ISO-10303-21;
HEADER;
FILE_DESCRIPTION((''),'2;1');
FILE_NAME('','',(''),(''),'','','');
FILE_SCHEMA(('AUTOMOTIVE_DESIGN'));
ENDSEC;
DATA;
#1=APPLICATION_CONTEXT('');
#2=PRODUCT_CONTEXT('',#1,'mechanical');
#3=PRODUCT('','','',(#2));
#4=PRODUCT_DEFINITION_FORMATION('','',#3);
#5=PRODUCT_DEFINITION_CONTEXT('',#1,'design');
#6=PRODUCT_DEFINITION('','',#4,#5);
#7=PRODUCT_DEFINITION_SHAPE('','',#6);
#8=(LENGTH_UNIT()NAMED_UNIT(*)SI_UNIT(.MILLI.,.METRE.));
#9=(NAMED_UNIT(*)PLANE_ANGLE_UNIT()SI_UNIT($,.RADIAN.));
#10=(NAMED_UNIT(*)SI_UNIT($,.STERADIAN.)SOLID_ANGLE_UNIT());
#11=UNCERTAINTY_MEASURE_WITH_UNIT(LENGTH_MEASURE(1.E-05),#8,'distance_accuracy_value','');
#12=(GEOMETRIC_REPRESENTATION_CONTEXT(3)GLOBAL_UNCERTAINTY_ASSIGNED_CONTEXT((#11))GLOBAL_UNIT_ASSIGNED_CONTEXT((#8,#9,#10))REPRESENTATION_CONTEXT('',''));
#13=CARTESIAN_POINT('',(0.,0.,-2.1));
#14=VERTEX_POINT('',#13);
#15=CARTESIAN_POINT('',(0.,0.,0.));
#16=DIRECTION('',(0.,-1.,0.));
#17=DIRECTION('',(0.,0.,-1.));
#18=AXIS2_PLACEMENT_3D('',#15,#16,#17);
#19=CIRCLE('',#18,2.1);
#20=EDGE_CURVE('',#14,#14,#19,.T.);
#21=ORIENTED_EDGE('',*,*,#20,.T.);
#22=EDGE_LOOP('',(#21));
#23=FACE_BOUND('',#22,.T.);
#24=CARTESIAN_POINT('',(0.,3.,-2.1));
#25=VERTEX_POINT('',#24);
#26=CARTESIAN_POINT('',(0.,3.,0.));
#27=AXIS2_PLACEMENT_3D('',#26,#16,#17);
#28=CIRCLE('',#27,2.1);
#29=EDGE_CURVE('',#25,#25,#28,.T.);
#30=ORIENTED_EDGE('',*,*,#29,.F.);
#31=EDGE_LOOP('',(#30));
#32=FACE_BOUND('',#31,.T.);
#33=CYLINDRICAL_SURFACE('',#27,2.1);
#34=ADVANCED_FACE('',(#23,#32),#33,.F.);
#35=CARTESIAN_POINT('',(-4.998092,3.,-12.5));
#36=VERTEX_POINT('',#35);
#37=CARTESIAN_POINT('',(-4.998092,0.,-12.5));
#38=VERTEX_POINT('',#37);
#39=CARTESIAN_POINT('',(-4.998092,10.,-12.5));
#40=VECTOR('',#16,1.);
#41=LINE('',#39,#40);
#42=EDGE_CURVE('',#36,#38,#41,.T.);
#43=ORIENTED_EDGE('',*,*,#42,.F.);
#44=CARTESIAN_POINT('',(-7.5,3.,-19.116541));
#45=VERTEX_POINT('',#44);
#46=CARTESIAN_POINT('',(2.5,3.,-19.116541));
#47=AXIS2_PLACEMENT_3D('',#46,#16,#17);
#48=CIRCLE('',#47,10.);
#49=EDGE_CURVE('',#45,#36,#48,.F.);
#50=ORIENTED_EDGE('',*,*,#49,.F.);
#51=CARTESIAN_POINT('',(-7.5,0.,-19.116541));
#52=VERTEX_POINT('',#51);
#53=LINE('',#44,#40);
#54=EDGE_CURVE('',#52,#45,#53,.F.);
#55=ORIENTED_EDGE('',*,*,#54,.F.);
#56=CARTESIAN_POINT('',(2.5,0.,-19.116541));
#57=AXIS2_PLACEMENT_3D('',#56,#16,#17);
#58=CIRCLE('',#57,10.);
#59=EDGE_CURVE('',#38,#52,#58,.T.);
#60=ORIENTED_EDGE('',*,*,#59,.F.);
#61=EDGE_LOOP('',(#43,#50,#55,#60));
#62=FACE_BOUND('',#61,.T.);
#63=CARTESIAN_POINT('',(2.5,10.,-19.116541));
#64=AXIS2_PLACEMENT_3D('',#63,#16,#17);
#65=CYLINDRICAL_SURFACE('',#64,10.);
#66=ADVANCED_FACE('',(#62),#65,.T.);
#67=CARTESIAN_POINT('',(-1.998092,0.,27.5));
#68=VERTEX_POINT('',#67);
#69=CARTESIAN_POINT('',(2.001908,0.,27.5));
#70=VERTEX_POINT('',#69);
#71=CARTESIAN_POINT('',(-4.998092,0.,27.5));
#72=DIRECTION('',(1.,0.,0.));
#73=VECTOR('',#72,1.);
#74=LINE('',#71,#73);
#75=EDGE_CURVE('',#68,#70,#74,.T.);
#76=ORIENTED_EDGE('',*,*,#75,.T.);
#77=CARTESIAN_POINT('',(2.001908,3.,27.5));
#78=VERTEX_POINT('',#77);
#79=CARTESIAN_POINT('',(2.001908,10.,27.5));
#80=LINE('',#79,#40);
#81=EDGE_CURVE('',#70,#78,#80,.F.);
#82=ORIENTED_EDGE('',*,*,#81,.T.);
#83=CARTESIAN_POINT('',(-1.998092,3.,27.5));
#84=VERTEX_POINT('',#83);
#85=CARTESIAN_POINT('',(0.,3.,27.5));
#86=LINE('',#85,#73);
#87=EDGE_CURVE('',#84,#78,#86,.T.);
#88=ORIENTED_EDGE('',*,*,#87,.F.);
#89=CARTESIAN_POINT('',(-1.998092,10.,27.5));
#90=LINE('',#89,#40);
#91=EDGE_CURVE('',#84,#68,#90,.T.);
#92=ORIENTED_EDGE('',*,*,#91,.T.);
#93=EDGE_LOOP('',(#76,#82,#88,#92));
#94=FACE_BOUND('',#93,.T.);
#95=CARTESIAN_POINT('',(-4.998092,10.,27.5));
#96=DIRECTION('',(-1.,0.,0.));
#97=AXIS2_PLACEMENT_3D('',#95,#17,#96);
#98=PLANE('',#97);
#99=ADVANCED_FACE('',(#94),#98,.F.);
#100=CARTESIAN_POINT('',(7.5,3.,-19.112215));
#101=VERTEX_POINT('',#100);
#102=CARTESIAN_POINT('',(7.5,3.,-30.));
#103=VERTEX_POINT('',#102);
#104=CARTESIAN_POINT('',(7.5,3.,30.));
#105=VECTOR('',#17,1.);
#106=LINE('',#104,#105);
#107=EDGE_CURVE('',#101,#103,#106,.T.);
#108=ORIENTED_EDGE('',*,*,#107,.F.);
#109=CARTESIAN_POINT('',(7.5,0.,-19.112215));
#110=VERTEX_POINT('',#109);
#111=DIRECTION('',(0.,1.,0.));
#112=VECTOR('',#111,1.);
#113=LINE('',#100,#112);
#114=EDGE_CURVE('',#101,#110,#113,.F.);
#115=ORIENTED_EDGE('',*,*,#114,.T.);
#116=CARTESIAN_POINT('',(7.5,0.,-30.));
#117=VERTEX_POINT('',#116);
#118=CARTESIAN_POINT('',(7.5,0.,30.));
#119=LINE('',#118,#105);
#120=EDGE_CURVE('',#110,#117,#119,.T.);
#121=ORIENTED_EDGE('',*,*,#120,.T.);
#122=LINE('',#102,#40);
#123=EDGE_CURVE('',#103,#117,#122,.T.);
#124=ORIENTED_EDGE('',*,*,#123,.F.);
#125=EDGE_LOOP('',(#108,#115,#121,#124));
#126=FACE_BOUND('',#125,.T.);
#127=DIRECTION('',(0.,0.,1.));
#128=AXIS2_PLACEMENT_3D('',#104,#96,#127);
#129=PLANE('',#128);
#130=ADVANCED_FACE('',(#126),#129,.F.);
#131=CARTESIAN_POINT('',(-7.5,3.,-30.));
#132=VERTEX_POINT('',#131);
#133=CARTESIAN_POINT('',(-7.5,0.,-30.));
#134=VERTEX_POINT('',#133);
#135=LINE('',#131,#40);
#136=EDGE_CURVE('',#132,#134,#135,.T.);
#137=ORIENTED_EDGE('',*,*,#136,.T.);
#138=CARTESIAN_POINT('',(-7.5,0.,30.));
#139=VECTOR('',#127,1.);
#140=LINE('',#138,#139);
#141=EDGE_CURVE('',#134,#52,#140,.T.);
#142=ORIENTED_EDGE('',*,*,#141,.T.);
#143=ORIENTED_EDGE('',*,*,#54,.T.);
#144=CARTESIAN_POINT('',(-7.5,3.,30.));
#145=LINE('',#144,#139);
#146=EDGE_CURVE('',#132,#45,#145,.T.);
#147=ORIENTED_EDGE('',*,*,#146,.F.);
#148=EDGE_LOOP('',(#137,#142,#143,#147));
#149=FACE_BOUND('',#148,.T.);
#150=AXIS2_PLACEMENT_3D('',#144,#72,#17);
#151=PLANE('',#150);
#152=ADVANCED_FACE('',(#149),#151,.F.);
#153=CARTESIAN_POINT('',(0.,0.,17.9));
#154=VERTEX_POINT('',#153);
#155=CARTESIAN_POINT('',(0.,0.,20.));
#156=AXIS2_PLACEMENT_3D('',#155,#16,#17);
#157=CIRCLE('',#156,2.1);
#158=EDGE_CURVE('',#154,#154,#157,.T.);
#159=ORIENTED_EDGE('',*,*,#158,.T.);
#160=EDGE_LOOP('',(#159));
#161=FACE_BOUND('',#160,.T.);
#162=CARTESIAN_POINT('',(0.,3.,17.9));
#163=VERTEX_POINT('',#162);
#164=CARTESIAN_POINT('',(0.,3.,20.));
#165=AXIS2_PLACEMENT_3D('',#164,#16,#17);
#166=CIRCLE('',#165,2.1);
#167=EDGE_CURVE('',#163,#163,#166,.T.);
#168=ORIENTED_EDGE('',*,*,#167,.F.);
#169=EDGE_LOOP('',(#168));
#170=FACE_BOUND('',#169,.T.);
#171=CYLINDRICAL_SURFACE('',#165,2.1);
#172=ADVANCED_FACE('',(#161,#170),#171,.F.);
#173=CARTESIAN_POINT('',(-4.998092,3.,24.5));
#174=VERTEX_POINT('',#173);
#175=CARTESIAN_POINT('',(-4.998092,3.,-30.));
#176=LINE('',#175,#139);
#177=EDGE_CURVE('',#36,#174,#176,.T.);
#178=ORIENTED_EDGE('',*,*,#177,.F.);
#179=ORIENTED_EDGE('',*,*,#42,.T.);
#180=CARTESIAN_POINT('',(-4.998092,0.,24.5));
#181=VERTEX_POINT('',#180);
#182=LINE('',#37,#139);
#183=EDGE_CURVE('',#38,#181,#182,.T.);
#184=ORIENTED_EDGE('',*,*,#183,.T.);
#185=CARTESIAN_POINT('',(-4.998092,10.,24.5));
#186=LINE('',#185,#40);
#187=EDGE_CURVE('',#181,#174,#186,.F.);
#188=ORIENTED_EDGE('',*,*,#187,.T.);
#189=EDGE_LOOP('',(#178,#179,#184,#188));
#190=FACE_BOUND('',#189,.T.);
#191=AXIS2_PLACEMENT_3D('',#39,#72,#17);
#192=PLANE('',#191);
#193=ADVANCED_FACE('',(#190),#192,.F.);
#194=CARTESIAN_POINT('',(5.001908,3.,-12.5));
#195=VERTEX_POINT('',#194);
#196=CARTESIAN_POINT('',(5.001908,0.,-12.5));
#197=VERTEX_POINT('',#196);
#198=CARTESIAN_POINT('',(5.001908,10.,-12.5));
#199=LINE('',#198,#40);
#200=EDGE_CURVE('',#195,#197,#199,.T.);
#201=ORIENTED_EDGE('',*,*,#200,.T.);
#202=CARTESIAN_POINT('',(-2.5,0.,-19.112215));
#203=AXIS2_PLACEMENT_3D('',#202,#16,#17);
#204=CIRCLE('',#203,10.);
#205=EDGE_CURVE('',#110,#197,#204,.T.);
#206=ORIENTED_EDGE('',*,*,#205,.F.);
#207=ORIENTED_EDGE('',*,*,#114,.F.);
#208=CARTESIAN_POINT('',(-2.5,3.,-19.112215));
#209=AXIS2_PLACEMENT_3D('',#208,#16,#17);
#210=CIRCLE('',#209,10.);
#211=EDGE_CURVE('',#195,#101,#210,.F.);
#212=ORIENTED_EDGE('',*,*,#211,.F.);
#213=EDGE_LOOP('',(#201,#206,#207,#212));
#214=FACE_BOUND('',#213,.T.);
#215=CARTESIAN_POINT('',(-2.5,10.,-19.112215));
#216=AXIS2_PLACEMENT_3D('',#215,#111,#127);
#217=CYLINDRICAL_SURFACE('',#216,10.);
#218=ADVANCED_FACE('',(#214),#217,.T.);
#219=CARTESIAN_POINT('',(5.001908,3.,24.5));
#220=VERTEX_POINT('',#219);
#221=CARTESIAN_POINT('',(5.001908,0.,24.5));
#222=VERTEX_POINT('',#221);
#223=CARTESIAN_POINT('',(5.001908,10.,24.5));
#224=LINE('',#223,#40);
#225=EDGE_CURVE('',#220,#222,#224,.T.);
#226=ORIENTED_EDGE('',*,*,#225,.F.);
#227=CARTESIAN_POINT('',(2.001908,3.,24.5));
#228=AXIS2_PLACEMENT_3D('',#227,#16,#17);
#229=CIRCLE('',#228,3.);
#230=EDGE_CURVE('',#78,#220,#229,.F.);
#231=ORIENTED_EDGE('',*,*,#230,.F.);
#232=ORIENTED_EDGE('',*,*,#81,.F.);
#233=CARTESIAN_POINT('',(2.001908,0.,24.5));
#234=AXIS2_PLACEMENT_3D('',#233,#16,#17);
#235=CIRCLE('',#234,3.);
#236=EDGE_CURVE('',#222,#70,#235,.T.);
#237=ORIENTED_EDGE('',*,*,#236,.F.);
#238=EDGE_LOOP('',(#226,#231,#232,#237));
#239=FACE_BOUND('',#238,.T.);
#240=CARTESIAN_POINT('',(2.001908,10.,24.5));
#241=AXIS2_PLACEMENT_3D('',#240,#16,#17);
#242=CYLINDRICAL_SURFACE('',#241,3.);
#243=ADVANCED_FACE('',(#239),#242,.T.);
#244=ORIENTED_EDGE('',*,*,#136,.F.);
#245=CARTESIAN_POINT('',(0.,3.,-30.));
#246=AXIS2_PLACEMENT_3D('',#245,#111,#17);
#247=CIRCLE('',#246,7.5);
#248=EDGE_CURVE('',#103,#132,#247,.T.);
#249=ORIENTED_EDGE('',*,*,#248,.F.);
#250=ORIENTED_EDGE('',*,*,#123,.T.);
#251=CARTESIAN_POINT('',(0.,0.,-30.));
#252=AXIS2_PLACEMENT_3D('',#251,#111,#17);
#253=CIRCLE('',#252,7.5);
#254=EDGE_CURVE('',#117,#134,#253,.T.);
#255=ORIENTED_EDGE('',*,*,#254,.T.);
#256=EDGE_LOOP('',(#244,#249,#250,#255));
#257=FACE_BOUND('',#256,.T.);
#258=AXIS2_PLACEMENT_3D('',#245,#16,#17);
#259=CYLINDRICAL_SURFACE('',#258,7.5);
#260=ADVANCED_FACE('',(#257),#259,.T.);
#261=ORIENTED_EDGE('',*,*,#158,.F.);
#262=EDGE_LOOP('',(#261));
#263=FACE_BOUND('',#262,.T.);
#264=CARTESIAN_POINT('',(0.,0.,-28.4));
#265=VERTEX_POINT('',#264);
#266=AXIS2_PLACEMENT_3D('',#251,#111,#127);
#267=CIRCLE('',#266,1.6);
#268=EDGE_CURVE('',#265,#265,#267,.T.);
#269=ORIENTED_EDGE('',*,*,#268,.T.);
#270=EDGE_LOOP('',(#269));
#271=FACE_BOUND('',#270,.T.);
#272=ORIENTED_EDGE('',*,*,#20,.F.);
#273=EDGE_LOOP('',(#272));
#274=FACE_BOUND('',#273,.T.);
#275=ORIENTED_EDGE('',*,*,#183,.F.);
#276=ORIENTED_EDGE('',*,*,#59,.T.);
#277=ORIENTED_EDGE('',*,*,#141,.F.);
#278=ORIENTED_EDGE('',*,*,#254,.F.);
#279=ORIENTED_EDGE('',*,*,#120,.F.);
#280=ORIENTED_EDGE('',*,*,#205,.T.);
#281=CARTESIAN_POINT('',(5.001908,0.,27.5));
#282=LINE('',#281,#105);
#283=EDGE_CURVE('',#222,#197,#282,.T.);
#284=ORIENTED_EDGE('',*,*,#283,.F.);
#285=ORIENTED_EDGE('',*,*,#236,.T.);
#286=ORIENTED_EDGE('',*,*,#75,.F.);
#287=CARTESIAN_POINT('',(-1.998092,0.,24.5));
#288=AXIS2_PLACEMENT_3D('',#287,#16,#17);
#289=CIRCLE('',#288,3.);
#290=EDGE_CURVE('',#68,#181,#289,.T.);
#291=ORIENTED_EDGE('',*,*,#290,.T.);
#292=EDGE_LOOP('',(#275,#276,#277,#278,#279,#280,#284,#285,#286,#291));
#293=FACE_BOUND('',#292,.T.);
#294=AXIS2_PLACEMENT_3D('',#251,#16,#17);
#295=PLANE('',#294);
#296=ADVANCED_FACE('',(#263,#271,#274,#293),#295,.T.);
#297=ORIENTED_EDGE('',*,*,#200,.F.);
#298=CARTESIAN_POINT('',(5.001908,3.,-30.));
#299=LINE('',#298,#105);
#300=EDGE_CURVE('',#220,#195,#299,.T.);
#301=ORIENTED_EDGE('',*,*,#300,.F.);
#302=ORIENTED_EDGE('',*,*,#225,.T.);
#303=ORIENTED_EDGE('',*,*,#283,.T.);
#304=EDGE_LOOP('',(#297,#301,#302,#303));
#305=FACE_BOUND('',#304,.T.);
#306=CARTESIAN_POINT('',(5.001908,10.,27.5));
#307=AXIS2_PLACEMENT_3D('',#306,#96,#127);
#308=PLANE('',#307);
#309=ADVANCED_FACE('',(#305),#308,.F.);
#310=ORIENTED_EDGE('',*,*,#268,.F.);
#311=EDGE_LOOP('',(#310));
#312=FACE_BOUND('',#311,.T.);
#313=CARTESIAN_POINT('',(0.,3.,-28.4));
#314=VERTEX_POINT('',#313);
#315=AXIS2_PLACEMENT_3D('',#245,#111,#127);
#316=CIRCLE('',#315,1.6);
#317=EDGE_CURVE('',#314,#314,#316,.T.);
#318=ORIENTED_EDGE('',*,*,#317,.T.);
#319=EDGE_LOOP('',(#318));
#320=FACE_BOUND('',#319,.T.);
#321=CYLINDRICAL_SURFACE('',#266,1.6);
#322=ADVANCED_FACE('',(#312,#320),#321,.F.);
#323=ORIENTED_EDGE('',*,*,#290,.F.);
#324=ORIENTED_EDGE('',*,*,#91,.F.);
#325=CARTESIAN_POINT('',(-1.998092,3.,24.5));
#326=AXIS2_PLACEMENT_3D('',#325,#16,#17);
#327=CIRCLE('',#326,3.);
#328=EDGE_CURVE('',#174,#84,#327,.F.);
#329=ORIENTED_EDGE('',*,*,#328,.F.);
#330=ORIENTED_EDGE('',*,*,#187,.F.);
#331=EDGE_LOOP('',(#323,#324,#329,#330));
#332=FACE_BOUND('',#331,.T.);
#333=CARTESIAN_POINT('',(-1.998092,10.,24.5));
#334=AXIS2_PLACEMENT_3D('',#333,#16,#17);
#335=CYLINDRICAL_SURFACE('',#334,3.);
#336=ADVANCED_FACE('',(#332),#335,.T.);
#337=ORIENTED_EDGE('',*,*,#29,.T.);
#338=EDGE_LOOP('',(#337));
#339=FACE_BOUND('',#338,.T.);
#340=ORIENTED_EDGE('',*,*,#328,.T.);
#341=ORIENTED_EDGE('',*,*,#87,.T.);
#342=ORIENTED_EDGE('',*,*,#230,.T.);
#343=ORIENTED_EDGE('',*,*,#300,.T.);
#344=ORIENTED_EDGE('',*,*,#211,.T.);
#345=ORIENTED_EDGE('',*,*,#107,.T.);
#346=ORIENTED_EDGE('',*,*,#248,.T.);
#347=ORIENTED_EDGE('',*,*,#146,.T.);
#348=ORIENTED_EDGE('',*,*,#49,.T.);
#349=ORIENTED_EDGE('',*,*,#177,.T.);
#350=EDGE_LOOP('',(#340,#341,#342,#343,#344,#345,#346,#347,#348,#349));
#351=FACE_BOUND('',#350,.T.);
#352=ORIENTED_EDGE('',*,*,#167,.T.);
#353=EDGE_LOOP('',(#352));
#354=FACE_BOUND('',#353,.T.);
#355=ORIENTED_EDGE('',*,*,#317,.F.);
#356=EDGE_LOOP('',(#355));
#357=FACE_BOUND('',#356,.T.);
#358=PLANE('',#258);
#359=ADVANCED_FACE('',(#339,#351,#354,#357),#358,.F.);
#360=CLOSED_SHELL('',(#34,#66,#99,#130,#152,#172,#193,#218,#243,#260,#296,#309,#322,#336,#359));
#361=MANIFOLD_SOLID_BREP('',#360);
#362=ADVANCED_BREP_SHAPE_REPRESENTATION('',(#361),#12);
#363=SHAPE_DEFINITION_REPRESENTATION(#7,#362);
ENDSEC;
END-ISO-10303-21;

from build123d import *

# Parameters (mm, degrees)
EXTRUDE_1_DEPTH     = 3
SKETCH_2_R          = 1.6
CUT_EXTRUDE_1_DEPTH = 3
SKETCH_3_R          = 2.1
CUT_EXTRUDE_2_DEPTH = 3
CUT_EXTRUDE_3_DEPTH = 10
FILLET_1_R          = 10
FILLET_2_R          = 3


with BuildPart() as part:
    # 草图1 → 凸台-拉伸1 (new body)
    with BuildSketch(Plane(origin=(0, 0, 0), x_dir=(1, 0, 0), z_dir=(0, 1, 0))):
        with BuildLine():
            Line((-7.5, -30), (7.5, -30))
            Line((7.5, -30), (7.5, 30))
            ThreePointArc((7.5, 30), (0, 37.5), (-7.5, 30))
            Line((-7.5, 30), (-7.5, -30))
        make_face()
    extrude(amount=EXTRUDE_1_DEPTH)

    # 草图2 → 切除-拉伸1 (cut)
    with BuildSketch(Plane(origin=(0, 3, 0), x_dir=(1, 0, 0), z_dir=(0, 1, 0))):
        with Locations(Location((0, 30, 0), (0, 0, 270))):
            Circle(SKETCH_2_R)
    extrude(amount=-CUT_EXTRUDE_1_DEPTH, mode=Mode.SUBTRACT)

    # 草图3 → 切除-拉伸2 (cut)
    with BuildSketch(Plane.XZ):
        with Locations(Location((0, 20, 0), (0, 0, 270))):
            Circle(SKETCH_3_R)
        with Locations(Location((0, 0, 0), (0, 0, 270))):
            Circle(SKETCH_3_R)
    extrude(amount=-CUT_EXTRUDE_2_DEPTH, mode=Mode.SUBTRACT)

    # 草图4 → 切除-拉伸3 (cut)
    with BuildSketch(Plane.XZ):
        Polygon((-7.5, -12.5), (-4.9980923, -12.5), (-4.9980923, 27.5), (5.0019077, 27.5), (5.0019077, -12.5), (7.5, -12.5), (7.5, 30), (-7.5, 30), align=None)
    extrude(amount=-CUT_EXTRUDE_3_DEPTH, mode=Mode.SUBTRACT)

    # 圆角1
    # the kernel refuses this fillet: 10 mm, written as the material it takes off along each edge
    with BuildSketch(Plane(origin=(7.5, -16.5305363, -12.5), x_dir=(0, 0, -1), z_dir=(0, 1, 0))) as fillet_1_piece_1:
        with BuildLine():
            CenterArc((6.61221452, 10), FILLET_1_R, 228.606905679, 41.393094321)
            Line((0, 2.4980923), (-0.13224429, 2.348054146))
            ThreePointArc((-0.13224429, 2.348054146), (-0.2, 1.24904615), (-0.2, 0))
            Line((-0.2, 0), (0, -0.2))
            Line((0, -0.2), (6.61221452, -0.2))
            Line((6.61221452, -0.2), (6.61221452, 0))
        make_face()
    extrude(amount=36.061072601, mode=Mode.SUBTRACT)
    with BuildSketch(Plane(origin=(-7.5, -16.541351944, -12.5), x_dir=(0, 0, -1), z_dir=(0, 1, 0))) as fillet_1_piece_2:
        with BuildLine():
            CenterArc((6.616540778, -10), FILLET_1_R, 90, 41.426144493)
            Line((0, -2.5019077), (-0.132330816, -2.351945854))
            ThreePointArc((-0.132330816, -2.351945854), (-0.2, -1.25095385), (-0.2, 0))
            Line((-0.2, 0), (0, 0.2))
            Line((0, 0.2), (6.616540778, 0.2))
            Line((6.616540778, 0.2), (6.616540778, 0))
        make_face()
    extrude(amount=36.082703888, mode=Mode.SUBTRACT)

    # 圆角2
    fillet_2_edges = [part.edges().sort_by_distance(p)[0] for p in [
        (5.0019077, 1.5, 27.5),
        (-4.9980923, 1.5, 27.5),
    ]]
    fillet(fillet_2_edges, radius=FILLET_2_R)


solid = part.part
